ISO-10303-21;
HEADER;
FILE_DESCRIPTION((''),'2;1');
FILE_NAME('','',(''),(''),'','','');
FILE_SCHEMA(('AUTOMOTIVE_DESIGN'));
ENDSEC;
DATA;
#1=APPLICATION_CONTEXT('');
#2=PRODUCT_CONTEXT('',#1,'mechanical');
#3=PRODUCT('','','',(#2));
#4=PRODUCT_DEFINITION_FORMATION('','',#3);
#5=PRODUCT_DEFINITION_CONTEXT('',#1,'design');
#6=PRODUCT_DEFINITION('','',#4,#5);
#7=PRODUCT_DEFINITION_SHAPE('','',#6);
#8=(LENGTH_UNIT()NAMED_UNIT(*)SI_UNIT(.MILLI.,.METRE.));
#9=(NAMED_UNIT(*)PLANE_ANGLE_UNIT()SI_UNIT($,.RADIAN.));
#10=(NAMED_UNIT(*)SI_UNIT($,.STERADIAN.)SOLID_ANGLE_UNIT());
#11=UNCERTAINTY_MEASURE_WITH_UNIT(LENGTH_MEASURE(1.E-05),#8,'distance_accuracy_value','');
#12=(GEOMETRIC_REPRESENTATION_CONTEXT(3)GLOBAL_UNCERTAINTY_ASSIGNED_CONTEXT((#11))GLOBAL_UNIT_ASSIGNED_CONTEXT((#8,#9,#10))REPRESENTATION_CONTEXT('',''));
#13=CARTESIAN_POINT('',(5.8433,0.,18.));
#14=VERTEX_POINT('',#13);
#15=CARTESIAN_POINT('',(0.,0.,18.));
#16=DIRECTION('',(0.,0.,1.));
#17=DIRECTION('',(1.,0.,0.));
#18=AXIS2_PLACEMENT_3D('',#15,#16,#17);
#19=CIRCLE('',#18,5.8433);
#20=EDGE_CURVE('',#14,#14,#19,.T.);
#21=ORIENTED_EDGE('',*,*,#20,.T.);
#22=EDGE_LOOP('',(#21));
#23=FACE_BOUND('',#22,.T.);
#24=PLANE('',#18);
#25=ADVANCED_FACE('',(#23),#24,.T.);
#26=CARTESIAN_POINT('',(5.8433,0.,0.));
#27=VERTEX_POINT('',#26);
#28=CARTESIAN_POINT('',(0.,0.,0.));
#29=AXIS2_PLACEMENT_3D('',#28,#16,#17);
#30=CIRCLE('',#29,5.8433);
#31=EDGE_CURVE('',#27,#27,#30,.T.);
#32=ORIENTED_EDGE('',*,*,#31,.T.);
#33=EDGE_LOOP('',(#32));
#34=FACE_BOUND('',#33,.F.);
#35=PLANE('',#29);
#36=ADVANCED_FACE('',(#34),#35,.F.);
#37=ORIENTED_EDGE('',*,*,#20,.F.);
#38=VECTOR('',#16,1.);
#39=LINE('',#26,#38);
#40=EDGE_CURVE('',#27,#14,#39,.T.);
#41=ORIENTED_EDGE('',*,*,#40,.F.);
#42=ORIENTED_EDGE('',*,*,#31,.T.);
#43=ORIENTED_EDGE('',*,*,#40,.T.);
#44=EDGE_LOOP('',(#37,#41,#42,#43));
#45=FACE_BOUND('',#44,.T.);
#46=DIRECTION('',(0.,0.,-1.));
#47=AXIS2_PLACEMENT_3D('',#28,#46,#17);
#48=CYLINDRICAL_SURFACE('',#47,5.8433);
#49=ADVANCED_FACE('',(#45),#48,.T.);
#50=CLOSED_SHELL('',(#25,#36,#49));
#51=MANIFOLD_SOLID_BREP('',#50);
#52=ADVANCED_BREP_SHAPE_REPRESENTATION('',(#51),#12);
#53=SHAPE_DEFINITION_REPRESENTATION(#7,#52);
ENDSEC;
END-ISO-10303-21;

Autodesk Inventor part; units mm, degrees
sketch "Sketch1" plane through (0, 0, 0) normal (0, 0, 1) x (1, 0, 0)
  circle A0 centre (0, 0) radius 5.8433
  dimension "d0" = 11.6865
extrude "Extrusion1" add sketch "Sketch1" along normal blind 18
ref_plane "Work Plane2" through (0, 0, 9) normal (0, 0, 1) x (1, 0, 0)
sketch "Sketch2" plane through (0, 0, 0) normal (0, 0, -1) x (-1, 0, 0)
  circle A0 centre (0, 0) radius 5.8433 projected
  circle A1 centre (0, 0) radius 5
  dimension "d3" = 10
surface extrude "Pitch Diameter" sketch "Sketch2" against normal through all shown no curves A1
ref_plane "Work Plane8" through (0, 0, 0) normal (0.9510565, 0.309017, 0) x (0, 0, 1)
ref_plane "Work Plane9" through (0, 0, 0) normal (1, 0, 0) x (0, 1, 0)
feature "Spur Gear" [suppressed]
equation "\"d0\" = da_da"
equation "\"d1\" = da_b"
equation "\"d3\" = da_d"
equation "\"d16\" = da_aw"
equation "\"d43\" = da_aw"
equation "\"d46\" = da_aw"
equation "\"da_da\" = 11.686539"
equation "\"da_b\" = 18"
equation "\"da_d\" = 10"
equation "\"da_aw\" = 11.7"
properties part number "rs390_gear" material "Steel"
